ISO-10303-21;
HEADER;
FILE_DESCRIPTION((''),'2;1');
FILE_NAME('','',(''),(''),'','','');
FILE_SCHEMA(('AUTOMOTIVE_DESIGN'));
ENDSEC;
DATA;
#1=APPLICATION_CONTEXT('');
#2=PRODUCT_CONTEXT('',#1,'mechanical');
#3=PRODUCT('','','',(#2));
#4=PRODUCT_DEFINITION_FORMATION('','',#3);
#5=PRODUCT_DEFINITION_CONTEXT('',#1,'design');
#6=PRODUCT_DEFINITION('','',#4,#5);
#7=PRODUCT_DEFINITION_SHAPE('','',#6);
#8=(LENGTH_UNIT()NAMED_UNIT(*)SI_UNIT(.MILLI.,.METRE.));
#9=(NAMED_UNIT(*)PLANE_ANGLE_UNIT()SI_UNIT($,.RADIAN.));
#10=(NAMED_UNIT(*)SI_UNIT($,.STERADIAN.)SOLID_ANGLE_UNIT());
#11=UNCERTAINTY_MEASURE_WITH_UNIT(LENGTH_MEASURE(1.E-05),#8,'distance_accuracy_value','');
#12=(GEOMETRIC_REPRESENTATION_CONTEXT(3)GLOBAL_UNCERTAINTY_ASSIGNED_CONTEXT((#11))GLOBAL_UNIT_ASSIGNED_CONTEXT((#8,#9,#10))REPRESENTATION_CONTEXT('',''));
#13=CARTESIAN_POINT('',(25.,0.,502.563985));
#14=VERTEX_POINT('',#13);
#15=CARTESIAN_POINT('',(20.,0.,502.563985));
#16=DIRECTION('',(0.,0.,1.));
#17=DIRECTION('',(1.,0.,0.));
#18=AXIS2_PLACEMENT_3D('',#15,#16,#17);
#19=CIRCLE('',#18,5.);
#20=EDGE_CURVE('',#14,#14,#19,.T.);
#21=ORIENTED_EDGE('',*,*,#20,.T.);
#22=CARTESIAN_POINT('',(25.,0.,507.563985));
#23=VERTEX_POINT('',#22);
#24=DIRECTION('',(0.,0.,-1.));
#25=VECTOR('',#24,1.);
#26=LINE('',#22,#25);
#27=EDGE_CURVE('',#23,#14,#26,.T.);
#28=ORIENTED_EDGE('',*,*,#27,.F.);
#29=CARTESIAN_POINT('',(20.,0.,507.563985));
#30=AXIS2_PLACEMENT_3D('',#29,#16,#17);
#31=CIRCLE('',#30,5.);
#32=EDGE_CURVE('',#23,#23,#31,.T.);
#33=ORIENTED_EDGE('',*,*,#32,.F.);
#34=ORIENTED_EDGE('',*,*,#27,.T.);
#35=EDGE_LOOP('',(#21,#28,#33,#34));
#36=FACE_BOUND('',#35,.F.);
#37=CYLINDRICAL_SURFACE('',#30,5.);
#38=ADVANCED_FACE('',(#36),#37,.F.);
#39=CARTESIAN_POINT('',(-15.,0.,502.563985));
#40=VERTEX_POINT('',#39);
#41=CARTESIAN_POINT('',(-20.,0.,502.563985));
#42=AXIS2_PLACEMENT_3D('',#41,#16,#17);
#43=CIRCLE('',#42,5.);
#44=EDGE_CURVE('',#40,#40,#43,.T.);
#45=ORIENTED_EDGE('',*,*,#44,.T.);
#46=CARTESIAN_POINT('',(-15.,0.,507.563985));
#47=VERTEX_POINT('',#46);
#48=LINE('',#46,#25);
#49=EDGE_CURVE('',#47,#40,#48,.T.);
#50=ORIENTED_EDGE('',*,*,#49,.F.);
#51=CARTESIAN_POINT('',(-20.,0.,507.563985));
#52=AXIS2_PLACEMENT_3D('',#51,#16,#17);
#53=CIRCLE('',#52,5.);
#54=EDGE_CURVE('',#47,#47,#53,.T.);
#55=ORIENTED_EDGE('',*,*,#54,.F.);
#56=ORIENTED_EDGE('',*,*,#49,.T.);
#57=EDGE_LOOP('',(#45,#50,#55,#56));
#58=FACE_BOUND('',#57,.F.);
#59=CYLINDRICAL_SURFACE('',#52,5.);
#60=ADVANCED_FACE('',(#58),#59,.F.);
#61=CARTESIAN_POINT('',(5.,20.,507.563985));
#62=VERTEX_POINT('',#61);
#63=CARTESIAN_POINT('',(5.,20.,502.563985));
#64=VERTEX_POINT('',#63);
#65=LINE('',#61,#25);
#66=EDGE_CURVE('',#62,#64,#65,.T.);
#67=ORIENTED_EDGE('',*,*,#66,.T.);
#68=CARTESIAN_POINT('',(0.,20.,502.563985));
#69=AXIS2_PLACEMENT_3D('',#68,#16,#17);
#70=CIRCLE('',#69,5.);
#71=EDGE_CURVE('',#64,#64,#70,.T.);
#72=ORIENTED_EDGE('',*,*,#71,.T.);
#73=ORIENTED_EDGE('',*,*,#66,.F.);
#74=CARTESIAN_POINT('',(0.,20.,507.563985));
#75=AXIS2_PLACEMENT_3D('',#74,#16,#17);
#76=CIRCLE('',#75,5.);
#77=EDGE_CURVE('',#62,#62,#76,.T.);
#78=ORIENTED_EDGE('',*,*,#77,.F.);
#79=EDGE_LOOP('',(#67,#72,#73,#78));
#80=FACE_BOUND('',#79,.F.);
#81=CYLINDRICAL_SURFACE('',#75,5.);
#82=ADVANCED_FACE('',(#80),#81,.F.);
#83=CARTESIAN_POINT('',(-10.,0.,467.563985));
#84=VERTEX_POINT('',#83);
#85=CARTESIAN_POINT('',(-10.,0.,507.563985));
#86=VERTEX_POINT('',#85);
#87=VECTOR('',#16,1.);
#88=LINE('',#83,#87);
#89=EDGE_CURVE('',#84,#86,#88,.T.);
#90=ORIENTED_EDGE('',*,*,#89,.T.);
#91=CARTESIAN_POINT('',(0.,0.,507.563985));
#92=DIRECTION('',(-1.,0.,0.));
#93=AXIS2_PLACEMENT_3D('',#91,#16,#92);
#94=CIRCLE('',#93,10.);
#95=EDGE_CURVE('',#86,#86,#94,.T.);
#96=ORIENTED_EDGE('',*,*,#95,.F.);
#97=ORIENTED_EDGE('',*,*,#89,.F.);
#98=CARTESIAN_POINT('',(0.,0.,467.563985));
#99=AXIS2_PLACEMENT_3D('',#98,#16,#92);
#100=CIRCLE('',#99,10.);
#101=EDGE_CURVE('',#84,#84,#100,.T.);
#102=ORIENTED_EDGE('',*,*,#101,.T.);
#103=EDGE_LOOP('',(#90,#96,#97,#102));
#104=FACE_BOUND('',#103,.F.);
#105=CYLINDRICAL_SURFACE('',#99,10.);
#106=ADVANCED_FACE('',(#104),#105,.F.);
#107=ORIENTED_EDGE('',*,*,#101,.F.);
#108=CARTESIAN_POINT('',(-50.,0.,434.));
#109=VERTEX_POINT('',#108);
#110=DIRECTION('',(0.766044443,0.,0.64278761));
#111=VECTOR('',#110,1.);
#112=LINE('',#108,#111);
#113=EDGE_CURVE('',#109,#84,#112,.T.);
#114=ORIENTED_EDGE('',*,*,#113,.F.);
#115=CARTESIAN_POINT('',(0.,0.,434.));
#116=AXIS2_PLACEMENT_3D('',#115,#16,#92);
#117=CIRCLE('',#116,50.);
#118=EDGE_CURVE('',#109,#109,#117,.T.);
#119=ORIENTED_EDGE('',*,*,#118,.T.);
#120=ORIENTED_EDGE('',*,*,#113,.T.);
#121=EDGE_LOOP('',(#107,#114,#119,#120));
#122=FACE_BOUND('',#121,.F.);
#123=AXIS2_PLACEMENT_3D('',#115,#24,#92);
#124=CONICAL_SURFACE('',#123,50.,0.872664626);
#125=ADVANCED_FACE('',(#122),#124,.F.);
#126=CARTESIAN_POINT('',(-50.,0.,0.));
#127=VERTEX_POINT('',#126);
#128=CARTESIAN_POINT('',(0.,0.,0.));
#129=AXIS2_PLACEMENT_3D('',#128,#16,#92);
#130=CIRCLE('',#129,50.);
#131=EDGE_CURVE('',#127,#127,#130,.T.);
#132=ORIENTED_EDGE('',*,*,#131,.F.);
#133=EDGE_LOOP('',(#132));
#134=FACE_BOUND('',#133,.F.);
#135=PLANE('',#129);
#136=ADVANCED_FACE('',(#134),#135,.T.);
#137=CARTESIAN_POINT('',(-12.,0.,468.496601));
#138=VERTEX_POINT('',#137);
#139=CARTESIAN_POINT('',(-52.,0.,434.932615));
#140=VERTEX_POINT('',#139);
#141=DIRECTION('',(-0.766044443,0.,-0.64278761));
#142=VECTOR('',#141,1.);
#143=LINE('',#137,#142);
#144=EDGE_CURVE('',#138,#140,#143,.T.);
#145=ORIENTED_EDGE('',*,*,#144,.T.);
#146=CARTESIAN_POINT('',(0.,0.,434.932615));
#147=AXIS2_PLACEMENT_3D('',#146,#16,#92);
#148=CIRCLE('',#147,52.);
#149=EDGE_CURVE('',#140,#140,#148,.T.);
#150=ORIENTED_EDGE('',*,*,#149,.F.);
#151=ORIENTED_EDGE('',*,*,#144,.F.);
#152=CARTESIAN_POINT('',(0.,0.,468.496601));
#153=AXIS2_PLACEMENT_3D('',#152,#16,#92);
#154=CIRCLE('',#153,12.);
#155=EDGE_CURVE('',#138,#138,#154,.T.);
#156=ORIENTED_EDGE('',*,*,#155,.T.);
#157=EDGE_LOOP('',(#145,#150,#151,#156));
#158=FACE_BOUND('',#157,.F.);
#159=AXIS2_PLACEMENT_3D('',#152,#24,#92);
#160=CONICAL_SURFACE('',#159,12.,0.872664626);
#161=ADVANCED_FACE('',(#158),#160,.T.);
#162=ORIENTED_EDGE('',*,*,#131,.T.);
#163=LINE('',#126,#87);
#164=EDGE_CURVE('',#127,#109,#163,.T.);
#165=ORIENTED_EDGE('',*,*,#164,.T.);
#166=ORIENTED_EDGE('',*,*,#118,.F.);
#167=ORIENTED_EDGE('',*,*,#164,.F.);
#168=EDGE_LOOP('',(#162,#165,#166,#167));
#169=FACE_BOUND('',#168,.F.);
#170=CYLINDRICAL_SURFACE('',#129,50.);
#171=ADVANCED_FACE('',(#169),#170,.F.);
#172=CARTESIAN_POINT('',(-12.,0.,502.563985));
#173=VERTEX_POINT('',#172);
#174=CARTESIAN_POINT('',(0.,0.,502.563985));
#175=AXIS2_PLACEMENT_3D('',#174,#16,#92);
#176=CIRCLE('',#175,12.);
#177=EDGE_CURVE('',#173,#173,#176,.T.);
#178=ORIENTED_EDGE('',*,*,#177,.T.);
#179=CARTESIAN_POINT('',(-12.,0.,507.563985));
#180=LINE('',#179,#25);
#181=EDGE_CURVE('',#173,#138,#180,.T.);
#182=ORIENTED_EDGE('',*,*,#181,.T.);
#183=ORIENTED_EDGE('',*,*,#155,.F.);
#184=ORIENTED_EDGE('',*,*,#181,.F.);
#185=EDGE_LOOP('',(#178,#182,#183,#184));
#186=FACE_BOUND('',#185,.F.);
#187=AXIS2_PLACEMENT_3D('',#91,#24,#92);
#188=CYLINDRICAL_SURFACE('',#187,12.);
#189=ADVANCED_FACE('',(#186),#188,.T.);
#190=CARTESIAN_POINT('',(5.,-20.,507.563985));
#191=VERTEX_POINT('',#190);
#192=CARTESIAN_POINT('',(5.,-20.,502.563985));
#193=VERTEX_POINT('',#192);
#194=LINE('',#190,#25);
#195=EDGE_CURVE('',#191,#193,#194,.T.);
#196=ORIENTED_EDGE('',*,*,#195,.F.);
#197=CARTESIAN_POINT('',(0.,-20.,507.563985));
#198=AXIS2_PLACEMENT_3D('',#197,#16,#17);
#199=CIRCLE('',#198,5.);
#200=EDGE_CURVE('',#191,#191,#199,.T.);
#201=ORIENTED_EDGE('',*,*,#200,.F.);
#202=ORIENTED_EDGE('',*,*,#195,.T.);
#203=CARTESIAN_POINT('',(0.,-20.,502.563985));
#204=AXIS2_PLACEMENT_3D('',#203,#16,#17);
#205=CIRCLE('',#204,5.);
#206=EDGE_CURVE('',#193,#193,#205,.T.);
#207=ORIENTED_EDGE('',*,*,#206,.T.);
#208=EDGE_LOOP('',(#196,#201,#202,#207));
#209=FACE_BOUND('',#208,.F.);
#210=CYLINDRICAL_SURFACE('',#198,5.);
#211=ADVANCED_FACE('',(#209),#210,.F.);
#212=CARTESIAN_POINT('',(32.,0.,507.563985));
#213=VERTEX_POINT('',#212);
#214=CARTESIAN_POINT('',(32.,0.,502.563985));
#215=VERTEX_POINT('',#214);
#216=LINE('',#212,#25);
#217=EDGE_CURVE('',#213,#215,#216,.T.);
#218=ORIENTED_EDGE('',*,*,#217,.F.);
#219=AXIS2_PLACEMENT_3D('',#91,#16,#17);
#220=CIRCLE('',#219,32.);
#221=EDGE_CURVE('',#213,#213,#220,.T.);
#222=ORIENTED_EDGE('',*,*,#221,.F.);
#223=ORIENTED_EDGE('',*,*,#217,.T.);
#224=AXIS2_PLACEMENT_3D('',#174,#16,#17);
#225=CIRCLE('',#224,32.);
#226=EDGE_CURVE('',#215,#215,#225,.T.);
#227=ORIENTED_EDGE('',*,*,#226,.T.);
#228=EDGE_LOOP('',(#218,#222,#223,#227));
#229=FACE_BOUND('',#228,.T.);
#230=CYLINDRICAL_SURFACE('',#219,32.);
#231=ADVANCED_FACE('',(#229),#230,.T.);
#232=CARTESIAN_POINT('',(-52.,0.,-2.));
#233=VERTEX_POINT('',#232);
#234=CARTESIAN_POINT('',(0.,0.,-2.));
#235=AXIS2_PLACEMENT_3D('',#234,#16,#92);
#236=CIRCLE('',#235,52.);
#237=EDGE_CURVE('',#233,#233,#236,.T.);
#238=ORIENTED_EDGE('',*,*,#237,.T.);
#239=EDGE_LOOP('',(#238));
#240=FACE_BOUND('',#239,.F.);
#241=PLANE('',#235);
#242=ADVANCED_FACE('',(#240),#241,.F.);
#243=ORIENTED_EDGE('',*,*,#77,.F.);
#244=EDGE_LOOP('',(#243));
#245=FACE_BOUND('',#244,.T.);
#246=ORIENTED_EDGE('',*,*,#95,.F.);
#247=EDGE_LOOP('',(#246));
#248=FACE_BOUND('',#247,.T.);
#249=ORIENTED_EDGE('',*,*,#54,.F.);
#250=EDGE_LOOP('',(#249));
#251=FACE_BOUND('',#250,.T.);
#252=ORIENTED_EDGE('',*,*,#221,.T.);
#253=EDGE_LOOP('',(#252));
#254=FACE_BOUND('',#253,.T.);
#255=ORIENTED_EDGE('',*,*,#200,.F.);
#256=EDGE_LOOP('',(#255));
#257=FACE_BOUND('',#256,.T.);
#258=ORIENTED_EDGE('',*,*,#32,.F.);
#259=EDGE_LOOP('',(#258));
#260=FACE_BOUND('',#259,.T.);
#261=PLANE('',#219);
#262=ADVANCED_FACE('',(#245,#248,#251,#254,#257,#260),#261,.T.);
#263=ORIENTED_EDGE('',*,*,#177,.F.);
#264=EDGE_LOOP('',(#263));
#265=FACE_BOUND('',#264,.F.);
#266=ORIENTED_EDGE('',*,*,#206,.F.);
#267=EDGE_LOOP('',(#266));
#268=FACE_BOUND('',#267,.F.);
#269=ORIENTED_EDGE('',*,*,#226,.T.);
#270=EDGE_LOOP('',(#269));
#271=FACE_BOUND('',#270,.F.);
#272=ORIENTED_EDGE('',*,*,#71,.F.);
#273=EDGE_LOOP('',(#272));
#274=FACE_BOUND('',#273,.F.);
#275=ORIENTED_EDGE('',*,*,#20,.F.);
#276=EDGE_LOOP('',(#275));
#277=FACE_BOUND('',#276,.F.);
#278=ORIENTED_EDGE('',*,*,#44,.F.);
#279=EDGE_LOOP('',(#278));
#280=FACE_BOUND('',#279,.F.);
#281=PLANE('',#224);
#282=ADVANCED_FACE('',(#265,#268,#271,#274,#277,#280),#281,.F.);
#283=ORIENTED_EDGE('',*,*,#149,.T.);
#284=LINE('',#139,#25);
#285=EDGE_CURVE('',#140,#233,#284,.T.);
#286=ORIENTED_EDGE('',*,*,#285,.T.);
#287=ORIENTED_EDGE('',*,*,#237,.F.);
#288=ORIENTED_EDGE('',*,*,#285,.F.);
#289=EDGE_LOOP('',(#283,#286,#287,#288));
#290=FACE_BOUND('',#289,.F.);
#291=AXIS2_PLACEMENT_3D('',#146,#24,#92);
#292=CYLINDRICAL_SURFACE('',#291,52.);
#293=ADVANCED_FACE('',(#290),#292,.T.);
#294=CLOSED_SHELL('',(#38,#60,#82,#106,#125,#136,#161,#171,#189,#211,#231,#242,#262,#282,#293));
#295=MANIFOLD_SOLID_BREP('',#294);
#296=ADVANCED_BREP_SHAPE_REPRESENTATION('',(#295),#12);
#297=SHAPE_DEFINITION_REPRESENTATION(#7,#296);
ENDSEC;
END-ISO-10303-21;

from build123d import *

# Parameters (mm, degrees)
F2_R     = 32
F2_R_2   = 12
F3_DEPTH = 5
F4_R     = 5
F5_DEPTH = 5


with BuildPart() as f1:
    # F0 (on Front) → F1 (revolve)
    with BuildSketch(Plane.XZ):
        Polygon((-50, 0), (-50, 434), (-10, 467.5639852471), (-10, 507.5639852471), (-12, 507.5639852471), (-12, 468.4966005634), (-52, 434.9326153163), (-52, -2), (0, -2), (0, 0), align=None)
    revolve(axis=Axis((0, 0, 216.0225092206), (0, 0, 1)))

    # F2 (on face) → F3 (join)
    with BuildSketch(Plane.XY.offset(507.5639852471)):
        Circle(F2_R)
        Circle(F2_R_2, mode=Mode.SUBTRACT)
    extrude(amount=-F3_DEPTH)

    # F4 (on face) → F5 (cut, through all)
    with BuildSketch(Plane.XY.offset(507.5639852471)):
        with Locations((0, 20)):
            Circle(F4_R)
        with Locations((-20, 0)):
            Circle(F4_R)
        with Locations((0, -20)):
            Circle(F4_R)
        with Locations((20, 0)):
            Circle(F4_R)
    extrude(amount=-F5_DEPTH, mode=Mode.SUBTRACT)


solid = f1.part
